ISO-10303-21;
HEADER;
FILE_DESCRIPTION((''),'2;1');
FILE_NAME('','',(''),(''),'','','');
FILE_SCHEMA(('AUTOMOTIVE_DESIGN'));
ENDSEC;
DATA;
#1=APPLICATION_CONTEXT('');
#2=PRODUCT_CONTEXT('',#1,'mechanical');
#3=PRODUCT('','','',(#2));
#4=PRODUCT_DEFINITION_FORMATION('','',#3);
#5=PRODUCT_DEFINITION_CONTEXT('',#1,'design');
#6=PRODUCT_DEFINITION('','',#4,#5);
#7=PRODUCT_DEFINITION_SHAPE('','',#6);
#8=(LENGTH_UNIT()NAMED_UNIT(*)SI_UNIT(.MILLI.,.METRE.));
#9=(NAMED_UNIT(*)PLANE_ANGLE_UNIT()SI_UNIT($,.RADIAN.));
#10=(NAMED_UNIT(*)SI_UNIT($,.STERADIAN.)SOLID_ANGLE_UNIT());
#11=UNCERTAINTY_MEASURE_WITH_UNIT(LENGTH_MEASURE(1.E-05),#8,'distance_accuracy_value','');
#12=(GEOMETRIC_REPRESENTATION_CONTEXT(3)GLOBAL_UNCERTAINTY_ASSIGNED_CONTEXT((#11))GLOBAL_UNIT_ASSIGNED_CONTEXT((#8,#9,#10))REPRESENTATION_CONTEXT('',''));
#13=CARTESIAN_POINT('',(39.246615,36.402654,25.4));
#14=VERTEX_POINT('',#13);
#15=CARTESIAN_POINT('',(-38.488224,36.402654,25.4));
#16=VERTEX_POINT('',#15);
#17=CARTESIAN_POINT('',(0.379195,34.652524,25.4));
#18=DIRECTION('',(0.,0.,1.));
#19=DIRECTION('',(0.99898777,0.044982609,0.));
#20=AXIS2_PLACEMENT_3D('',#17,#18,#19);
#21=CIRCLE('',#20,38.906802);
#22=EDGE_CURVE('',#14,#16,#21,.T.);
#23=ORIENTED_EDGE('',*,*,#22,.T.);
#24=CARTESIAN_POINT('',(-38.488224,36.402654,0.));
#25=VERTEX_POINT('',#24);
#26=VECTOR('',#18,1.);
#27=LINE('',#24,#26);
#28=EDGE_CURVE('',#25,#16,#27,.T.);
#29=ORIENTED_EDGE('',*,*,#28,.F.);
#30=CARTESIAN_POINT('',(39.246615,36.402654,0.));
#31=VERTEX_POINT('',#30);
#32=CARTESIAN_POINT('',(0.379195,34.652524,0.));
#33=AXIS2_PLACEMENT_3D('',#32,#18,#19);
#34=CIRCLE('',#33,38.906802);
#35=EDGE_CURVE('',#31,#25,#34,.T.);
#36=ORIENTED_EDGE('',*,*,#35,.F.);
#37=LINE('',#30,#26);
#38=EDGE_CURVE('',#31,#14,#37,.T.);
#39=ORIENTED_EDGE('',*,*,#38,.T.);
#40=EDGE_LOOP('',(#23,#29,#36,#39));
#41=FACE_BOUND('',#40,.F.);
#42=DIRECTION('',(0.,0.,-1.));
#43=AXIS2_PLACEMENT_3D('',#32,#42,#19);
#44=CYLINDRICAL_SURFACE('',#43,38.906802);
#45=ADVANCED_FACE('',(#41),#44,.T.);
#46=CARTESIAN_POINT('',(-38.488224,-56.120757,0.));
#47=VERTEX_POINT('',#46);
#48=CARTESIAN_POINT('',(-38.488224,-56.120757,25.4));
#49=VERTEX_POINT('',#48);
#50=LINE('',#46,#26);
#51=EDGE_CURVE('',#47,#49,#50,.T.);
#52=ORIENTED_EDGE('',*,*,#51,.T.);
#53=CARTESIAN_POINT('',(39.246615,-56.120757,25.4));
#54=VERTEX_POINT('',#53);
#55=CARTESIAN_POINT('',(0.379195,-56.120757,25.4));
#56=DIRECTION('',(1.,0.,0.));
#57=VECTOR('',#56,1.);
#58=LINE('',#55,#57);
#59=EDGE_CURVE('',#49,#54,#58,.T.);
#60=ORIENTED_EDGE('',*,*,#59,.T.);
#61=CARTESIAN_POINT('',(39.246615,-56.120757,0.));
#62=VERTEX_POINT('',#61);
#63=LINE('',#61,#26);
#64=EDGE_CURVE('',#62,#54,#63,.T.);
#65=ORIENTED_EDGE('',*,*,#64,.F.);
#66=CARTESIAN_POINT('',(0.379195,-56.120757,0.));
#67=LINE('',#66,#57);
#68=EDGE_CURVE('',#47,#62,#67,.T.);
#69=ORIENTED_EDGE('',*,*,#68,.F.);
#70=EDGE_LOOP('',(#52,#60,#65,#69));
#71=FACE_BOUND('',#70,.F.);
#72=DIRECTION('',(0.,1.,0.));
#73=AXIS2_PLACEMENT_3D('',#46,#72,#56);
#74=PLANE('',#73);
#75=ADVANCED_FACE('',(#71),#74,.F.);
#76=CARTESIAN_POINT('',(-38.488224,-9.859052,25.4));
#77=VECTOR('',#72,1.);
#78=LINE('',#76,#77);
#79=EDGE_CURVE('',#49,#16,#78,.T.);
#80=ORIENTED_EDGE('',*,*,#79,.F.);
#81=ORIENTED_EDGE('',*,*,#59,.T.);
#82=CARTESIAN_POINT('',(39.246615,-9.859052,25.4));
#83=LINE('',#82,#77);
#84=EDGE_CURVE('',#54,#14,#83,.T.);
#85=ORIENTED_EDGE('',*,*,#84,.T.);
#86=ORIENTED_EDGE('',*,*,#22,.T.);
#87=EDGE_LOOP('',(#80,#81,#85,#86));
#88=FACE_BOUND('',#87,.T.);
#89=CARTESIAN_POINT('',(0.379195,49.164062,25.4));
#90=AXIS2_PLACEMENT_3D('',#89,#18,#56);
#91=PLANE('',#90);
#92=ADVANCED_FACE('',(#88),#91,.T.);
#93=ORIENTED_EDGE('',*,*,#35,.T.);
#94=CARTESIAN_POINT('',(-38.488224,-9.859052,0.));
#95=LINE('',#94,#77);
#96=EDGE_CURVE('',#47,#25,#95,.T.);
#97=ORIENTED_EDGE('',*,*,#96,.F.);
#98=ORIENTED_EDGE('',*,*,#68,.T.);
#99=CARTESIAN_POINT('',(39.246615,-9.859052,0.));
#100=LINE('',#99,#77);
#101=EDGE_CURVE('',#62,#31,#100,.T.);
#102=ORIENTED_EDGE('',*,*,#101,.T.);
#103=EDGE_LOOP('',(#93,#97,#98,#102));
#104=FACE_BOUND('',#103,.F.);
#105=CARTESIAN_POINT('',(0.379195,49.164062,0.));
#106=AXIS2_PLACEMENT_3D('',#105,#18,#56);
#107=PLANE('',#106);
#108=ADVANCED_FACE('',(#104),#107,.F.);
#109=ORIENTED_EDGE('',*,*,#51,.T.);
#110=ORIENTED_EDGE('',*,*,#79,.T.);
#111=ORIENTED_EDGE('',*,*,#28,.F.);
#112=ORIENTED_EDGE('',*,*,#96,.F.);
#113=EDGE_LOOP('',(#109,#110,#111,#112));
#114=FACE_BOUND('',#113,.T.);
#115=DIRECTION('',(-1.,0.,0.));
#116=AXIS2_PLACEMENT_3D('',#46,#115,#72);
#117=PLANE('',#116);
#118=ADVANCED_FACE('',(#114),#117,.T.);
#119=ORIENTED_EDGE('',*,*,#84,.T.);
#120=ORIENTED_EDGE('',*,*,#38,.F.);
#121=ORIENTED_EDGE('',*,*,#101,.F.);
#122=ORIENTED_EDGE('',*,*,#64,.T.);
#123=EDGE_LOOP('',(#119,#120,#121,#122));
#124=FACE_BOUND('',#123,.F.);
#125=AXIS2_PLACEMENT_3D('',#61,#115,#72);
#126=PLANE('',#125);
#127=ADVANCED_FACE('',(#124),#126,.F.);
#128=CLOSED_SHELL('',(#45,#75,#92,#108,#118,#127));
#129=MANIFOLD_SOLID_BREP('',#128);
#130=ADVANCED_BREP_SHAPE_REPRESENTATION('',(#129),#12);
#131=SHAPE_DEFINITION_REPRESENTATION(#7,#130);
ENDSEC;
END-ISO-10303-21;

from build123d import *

# Parameters (mm, degrees)
F0_W     = 77.7348391712
F0_H     = 92.5234109163
F1_DEPTH = 25.4


# Not quite as in the source:
# - the program builds the solid bodies; features that only make, move or delete a surface that nothing else refers to are left out


with BuildPart() as f1:
    # F0 (on Top) → F1 (new body)
    with BuildSketch(Plane.XY):
        with BuildLine():
            ThreePointArc((39.2466150224, 36.4026539028), (0.3791954368, 73.5593266262), (-38.4882241488, 36.4026539028))
            Line((-38.4882241488, 36.4026539028), (39.2466150224, 36.4026539028))
        make_face()
        with Locations((0.3791954368, -9.8590515554)):
            Rectangle(F0_W, F0_H)
    extrude(amount=F1_DEPTH)


solid = f1.part
